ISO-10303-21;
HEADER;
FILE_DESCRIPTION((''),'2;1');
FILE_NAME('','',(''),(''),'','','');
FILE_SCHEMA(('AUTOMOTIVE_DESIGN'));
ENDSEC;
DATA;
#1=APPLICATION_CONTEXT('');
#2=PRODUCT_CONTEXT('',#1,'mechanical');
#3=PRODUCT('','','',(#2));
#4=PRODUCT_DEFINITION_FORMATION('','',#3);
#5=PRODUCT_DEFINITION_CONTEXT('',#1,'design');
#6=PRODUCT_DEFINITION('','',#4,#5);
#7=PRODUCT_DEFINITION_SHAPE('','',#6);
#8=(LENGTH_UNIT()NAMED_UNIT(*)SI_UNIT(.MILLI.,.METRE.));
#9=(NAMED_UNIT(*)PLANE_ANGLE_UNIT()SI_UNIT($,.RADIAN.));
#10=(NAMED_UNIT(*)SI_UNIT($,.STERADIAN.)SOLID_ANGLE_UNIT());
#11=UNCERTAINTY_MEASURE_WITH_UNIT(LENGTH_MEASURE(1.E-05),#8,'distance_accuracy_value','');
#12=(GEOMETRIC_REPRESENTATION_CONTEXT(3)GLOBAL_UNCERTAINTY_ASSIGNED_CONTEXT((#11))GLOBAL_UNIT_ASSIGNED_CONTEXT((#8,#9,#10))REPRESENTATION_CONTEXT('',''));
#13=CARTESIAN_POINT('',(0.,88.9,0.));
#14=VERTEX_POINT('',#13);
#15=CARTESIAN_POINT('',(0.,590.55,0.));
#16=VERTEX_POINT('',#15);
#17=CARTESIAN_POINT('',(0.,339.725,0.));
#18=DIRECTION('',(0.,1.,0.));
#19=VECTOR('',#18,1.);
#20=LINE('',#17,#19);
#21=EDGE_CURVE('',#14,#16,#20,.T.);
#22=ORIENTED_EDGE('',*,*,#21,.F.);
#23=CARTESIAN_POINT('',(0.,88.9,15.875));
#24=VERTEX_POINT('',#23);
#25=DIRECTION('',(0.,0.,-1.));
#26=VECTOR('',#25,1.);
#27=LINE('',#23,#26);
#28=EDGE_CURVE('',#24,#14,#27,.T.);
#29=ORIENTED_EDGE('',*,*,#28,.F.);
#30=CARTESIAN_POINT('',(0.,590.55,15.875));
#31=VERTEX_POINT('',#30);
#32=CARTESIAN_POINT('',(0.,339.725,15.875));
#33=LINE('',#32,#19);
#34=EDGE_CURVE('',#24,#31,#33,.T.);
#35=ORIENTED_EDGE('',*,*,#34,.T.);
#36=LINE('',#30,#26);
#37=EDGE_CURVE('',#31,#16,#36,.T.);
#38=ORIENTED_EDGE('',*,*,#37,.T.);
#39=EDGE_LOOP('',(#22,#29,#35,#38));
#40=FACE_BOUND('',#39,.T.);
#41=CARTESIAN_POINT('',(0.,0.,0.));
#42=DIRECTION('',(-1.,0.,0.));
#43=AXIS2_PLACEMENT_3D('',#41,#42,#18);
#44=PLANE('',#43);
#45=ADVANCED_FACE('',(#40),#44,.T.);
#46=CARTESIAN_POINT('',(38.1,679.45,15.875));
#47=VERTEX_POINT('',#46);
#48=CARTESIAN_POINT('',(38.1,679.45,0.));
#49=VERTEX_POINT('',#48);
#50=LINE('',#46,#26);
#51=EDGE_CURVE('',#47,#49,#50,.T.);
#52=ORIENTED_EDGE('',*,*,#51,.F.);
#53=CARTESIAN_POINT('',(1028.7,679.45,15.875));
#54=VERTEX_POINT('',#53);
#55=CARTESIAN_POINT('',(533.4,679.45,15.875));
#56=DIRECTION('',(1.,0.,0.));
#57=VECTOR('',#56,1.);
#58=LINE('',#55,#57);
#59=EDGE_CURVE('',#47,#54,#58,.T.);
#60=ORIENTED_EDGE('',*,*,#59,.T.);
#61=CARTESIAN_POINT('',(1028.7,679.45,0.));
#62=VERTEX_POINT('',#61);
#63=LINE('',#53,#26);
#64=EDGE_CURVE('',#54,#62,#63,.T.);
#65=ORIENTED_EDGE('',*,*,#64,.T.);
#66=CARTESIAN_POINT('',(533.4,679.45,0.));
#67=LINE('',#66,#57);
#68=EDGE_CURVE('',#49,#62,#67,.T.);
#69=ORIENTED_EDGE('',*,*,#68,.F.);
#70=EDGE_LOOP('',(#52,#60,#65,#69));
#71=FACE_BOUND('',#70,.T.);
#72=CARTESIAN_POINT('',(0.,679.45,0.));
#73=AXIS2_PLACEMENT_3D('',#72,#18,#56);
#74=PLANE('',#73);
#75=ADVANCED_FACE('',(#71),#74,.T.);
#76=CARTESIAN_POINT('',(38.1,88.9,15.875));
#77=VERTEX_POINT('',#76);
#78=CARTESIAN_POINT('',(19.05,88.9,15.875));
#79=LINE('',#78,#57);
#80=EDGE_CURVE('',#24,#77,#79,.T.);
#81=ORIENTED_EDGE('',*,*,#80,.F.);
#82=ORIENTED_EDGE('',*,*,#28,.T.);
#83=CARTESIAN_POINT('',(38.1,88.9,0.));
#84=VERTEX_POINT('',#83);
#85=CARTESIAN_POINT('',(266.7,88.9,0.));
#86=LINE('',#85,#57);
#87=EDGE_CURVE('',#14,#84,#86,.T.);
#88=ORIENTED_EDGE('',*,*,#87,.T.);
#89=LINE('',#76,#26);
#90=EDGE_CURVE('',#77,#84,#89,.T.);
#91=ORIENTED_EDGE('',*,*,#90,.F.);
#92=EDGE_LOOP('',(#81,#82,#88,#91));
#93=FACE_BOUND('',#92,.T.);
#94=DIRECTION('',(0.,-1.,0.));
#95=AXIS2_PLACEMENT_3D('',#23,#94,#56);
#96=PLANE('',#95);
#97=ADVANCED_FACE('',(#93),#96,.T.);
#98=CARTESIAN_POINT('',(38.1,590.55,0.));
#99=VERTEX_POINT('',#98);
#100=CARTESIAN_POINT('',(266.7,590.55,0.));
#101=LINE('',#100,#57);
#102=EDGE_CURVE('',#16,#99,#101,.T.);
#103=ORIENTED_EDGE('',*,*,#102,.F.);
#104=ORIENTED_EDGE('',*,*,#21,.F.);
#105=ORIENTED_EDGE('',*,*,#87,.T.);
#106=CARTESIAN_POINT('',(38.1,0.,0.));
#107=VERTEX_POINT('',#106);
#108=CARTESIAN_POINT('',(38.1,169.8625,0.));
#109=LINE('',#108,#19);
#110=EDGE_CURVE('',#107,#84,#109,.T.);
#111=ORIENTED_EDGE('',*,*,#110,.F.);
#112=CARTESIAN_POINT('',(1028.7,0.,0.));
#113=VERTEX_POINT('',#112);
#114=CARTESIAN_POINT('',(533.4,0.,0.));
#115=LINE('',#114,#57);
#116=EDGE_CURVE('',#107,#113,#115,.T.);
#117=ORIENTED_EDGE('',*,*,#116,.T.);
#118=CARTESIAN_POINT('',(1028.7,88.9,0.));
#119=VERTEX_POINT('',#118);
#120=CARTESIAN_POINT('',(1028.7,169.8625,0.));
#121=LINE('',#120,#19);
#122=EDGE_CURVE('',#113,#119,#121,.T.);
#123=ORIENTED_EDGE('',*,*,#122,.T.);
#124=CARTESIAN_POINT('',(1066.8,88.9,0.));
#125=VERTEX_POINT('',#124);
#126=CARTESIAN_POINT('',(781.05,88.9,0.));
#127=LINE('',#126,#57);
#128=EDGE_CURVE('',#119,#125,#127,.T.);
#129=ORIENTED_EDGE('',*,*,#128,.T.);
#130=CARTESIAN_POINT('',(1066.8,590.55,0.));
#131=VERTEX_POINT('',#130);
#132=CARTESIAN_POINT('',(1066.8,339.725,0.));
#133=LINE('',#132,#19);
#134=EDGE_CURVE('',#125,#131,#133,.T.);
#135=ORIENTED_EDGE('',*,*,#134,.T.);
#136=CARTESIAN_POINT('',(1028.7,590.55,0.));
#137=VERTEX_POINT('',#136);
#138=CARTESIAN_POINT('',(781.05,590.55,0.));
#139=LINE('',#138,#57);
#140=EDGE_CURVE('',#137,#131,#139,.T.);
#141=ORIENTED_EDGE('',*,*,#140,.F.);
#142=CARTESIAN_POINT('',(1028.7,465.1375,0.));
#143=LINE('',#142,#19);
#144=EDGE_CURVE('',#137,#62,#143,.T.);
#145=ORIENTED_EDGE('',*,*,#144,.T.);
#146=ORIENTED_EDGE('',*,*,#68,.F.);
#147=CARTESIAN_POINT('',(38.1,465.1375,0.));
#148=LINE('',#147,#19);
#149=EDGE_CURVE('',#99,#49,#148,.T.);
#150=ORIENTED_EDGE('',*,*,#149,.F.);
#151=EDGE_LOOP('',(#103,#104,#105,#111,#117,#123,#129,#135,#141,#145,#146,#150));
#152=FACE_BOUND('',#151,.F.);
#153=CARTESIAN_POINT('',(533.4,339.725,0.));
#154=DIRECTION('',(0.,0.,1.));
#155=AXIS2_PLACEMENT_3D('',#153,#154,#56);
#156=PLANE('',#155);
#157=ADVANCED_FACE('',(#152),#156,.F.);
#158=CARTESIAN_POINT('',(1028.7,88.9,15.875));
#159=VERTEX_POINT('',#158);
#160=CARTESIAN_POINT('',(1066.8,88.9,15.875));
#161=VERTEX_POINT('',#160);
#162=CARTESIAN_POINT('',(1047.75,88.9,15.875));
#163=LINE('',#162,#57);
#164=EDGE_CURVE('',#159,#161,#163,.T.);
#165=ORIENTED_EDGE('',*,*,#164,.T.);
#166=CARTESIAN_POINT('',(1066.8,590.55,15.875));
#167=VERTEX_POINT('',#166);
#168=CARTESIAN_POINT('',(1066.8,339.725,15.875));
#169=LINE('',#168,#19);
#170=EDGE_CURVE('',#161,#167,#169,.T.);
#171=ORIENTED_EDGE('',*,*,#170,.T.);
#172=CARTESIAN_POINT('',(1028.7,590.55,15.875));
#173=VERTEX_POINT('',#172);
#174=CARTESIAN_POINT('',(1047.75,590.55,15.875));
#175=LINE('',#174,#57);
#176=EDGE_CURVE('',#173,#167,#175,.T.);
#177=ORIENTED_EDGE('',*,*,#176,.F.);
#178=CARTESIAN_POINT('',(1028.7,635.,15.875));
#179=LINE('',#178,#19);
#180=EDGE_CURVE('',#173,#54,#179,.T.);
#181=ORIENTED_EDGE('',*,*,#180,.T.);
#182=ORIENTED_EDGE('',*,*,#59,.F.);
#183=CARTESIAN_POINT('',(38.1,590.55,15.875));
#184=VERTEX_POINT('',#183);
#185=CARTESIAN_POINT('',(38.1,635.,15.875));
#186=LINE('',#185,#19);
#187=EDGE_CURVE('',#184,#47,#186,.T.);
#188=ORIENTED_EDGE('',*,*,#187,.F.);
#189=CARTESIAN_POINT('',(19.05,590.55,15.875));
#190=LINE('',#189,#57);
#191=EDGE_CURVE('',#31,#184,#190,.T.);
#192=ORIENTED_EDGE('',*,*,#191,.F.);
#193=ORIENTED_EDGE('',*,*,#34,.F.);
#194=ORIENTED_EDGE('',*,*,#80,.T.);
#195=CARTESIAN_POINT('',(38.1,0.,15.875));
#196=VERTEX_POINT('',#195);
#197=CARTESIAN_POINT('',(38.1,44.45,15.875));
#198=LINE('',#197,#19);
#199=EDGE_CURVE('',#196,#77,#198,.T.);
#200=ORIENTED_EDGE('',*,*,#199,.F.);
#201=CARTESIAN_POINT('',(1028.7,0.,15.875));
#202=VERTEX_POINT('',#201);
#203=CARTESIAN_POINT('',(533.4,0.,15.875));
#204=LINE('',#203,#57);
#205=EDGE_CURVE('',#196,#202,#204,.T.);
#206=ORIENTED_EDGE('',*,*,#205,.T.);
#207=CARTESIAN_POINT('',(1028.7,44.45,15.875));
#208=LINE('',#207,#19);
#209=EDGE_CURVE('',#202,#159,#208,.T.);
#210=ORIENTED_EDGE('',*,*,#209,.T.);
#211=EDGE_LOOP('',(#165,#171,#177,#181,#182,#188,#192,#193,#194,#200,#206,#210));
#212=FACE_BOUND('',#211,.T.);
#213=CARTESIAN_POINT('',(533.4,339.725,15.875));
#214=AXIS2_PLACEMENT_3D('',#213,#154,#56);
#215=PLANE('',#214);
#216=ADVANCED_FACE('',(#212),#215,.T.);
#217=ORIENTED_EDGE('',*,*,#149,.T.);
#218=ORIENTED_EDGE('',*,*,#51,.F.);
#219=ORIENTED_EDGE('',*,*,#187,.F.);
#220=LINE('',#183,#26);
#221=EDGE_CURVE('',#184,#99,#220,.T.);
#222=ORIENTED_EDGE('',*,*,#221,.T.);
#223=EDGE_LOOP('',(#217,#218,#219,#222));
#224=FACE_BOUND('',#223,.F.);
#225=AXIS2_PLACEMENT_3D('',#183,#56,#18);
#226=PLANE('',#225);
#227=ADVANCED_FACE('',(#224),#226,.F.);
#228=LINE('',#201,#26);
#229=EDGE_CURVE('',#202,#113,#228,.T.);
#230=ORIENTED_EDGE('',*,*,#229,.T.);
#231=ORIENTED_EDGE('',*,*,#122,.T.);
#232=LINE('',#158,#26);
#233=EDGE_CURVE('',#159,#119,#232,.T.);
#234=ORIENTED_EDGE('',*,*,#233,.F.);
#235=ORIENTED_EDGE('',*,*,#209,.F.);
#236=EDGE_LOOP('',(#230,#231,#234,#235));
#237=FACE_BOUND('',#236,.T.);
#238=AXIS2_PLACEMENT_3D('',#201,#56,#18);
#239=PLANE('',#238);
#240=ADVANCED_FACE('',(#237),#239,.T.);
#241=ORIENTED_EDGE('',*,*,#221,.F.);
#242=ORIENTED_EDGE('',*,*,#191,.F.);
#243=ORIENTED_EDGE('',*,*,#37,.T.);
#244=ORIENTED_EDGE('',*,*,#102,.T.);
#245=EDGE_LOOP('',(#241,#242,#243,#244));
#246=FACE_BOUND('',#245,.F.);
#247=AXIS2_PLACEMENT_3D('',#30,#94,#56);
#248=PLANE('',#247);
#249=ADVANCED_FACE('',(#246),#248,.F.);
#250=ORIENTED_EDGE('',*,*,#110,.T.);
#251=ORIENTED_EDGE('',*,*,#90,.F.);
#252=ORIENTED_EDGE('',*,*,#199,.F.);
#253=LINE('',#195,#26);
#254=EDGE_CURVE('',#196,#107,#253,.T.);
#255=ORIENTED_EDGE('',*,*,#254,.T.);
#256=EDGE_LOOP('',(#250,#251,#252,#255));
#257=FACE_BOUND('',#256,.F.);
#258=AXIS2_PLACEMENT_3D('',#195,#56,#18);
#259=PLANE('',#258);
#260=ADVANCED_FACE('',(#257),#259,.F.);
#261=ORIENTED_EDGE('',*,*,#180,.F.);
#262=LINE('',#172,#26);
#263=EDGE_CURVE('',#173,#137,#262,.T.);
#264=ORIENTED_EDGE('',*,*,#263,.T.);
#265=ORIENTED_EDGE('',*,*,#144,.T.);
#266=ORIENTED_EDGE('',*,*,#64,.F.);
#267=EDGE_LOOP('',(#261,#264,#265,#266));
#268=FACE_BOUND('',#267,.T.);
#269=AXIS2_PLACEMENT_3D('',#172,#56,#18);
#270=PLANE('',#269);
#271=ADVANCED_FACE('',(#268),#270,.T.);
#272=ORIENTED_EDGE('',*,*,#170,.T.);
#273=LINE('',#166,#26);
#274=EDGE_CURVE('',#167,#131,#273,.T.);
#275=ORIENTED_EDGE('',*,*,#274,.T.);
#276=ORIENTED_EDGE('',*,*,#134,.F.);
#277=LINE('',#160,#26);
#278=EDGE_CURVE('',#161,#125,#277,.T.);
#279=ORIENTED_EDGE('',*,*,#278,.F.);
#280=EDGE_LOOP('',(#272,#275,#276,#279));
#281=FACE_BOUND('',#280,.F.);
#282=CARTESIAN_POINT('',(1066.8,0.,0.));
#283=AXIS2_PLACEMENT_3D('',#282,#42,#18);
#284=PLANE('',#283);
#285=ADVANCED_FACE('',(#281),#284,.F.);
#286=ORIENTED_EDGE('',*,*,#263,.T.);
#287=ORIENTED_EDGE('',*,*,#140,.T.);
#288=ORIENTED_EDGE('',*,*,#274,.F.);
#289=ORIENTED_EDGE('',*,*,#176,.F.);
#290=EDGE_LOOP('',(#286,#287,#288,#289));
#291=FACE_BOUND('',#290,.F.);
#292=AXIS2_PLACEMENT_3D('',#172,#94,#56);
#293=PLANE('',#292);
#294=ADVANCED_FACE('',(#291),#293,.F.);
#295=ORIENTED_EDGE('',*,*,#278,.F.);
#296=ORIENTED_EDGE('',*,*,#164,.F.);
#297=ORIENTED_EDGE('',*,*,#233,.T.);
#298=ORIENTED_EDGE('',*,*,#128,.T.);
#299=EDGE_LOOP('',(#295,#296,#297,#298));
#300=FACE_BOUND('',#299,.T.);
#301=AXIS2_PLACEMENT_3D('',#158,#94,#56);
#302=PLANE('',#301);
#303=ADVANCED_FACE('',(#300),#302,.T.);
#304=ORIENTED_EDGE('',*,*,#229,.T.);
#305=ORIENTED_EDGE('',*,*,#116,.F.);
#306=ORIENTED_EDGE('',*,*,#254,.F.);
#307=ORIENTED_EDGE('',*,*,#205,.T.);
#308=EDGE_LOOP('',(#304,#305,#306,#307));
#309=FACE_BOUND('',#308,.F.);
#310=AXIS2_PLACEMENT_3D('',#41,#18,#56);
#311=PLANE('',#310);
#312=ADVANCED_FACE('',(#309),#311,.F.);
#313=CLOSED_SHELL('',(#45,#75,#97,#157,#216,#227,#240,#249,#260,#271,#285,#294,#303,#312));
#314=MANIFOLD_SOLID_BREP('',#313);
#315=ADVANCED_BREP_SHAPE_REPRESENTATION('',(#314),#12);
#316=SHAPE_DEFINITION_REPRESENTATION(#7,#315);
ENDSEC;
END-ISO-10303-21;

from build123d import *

# Parameters (mm, degrees)
F0_W     = 1066.8
F0_H     = 679.45
F1_DEPTH = 15.875
F2_W     = 38.1
F2_H     = 88.9
F3_DEPTH = 25.4


# Not quite as in the source:
# - a length typed as a fraction of an inch, garbled in the dataset ("3 / 203.2 mm" for 3/8 in), is restored


with BuildPart() as f1:
    # F0 (on Top) → F1 (new body)
    with BuildSketch(Plane.XY):
        with Locations((533.4, 339.725)):
            Rectangle(F0_W, F0_H)
    extrude(amount=F1_DEPTH)

    # F2 (on face) → F3 (cut)
    with BuildSketch(Plane.XY.offset(15.875)):
        with Locations((19.05, 44.45)):
            Rectangle(F2_W, F2_H)
        with Locations((19.05, 635)):
            Rectangle(F2_W, F2_H)
        with Locations((1047.75, 635)):
            Rectangle(F2_W, F2_H)
        with Locations((1047.75, 44.45)):
            Rectangle(F2_W, F2_H)
    extrude(amount=-F3_DEPTH, mode=Mode.SUBTRACT)


solid = f1.part
